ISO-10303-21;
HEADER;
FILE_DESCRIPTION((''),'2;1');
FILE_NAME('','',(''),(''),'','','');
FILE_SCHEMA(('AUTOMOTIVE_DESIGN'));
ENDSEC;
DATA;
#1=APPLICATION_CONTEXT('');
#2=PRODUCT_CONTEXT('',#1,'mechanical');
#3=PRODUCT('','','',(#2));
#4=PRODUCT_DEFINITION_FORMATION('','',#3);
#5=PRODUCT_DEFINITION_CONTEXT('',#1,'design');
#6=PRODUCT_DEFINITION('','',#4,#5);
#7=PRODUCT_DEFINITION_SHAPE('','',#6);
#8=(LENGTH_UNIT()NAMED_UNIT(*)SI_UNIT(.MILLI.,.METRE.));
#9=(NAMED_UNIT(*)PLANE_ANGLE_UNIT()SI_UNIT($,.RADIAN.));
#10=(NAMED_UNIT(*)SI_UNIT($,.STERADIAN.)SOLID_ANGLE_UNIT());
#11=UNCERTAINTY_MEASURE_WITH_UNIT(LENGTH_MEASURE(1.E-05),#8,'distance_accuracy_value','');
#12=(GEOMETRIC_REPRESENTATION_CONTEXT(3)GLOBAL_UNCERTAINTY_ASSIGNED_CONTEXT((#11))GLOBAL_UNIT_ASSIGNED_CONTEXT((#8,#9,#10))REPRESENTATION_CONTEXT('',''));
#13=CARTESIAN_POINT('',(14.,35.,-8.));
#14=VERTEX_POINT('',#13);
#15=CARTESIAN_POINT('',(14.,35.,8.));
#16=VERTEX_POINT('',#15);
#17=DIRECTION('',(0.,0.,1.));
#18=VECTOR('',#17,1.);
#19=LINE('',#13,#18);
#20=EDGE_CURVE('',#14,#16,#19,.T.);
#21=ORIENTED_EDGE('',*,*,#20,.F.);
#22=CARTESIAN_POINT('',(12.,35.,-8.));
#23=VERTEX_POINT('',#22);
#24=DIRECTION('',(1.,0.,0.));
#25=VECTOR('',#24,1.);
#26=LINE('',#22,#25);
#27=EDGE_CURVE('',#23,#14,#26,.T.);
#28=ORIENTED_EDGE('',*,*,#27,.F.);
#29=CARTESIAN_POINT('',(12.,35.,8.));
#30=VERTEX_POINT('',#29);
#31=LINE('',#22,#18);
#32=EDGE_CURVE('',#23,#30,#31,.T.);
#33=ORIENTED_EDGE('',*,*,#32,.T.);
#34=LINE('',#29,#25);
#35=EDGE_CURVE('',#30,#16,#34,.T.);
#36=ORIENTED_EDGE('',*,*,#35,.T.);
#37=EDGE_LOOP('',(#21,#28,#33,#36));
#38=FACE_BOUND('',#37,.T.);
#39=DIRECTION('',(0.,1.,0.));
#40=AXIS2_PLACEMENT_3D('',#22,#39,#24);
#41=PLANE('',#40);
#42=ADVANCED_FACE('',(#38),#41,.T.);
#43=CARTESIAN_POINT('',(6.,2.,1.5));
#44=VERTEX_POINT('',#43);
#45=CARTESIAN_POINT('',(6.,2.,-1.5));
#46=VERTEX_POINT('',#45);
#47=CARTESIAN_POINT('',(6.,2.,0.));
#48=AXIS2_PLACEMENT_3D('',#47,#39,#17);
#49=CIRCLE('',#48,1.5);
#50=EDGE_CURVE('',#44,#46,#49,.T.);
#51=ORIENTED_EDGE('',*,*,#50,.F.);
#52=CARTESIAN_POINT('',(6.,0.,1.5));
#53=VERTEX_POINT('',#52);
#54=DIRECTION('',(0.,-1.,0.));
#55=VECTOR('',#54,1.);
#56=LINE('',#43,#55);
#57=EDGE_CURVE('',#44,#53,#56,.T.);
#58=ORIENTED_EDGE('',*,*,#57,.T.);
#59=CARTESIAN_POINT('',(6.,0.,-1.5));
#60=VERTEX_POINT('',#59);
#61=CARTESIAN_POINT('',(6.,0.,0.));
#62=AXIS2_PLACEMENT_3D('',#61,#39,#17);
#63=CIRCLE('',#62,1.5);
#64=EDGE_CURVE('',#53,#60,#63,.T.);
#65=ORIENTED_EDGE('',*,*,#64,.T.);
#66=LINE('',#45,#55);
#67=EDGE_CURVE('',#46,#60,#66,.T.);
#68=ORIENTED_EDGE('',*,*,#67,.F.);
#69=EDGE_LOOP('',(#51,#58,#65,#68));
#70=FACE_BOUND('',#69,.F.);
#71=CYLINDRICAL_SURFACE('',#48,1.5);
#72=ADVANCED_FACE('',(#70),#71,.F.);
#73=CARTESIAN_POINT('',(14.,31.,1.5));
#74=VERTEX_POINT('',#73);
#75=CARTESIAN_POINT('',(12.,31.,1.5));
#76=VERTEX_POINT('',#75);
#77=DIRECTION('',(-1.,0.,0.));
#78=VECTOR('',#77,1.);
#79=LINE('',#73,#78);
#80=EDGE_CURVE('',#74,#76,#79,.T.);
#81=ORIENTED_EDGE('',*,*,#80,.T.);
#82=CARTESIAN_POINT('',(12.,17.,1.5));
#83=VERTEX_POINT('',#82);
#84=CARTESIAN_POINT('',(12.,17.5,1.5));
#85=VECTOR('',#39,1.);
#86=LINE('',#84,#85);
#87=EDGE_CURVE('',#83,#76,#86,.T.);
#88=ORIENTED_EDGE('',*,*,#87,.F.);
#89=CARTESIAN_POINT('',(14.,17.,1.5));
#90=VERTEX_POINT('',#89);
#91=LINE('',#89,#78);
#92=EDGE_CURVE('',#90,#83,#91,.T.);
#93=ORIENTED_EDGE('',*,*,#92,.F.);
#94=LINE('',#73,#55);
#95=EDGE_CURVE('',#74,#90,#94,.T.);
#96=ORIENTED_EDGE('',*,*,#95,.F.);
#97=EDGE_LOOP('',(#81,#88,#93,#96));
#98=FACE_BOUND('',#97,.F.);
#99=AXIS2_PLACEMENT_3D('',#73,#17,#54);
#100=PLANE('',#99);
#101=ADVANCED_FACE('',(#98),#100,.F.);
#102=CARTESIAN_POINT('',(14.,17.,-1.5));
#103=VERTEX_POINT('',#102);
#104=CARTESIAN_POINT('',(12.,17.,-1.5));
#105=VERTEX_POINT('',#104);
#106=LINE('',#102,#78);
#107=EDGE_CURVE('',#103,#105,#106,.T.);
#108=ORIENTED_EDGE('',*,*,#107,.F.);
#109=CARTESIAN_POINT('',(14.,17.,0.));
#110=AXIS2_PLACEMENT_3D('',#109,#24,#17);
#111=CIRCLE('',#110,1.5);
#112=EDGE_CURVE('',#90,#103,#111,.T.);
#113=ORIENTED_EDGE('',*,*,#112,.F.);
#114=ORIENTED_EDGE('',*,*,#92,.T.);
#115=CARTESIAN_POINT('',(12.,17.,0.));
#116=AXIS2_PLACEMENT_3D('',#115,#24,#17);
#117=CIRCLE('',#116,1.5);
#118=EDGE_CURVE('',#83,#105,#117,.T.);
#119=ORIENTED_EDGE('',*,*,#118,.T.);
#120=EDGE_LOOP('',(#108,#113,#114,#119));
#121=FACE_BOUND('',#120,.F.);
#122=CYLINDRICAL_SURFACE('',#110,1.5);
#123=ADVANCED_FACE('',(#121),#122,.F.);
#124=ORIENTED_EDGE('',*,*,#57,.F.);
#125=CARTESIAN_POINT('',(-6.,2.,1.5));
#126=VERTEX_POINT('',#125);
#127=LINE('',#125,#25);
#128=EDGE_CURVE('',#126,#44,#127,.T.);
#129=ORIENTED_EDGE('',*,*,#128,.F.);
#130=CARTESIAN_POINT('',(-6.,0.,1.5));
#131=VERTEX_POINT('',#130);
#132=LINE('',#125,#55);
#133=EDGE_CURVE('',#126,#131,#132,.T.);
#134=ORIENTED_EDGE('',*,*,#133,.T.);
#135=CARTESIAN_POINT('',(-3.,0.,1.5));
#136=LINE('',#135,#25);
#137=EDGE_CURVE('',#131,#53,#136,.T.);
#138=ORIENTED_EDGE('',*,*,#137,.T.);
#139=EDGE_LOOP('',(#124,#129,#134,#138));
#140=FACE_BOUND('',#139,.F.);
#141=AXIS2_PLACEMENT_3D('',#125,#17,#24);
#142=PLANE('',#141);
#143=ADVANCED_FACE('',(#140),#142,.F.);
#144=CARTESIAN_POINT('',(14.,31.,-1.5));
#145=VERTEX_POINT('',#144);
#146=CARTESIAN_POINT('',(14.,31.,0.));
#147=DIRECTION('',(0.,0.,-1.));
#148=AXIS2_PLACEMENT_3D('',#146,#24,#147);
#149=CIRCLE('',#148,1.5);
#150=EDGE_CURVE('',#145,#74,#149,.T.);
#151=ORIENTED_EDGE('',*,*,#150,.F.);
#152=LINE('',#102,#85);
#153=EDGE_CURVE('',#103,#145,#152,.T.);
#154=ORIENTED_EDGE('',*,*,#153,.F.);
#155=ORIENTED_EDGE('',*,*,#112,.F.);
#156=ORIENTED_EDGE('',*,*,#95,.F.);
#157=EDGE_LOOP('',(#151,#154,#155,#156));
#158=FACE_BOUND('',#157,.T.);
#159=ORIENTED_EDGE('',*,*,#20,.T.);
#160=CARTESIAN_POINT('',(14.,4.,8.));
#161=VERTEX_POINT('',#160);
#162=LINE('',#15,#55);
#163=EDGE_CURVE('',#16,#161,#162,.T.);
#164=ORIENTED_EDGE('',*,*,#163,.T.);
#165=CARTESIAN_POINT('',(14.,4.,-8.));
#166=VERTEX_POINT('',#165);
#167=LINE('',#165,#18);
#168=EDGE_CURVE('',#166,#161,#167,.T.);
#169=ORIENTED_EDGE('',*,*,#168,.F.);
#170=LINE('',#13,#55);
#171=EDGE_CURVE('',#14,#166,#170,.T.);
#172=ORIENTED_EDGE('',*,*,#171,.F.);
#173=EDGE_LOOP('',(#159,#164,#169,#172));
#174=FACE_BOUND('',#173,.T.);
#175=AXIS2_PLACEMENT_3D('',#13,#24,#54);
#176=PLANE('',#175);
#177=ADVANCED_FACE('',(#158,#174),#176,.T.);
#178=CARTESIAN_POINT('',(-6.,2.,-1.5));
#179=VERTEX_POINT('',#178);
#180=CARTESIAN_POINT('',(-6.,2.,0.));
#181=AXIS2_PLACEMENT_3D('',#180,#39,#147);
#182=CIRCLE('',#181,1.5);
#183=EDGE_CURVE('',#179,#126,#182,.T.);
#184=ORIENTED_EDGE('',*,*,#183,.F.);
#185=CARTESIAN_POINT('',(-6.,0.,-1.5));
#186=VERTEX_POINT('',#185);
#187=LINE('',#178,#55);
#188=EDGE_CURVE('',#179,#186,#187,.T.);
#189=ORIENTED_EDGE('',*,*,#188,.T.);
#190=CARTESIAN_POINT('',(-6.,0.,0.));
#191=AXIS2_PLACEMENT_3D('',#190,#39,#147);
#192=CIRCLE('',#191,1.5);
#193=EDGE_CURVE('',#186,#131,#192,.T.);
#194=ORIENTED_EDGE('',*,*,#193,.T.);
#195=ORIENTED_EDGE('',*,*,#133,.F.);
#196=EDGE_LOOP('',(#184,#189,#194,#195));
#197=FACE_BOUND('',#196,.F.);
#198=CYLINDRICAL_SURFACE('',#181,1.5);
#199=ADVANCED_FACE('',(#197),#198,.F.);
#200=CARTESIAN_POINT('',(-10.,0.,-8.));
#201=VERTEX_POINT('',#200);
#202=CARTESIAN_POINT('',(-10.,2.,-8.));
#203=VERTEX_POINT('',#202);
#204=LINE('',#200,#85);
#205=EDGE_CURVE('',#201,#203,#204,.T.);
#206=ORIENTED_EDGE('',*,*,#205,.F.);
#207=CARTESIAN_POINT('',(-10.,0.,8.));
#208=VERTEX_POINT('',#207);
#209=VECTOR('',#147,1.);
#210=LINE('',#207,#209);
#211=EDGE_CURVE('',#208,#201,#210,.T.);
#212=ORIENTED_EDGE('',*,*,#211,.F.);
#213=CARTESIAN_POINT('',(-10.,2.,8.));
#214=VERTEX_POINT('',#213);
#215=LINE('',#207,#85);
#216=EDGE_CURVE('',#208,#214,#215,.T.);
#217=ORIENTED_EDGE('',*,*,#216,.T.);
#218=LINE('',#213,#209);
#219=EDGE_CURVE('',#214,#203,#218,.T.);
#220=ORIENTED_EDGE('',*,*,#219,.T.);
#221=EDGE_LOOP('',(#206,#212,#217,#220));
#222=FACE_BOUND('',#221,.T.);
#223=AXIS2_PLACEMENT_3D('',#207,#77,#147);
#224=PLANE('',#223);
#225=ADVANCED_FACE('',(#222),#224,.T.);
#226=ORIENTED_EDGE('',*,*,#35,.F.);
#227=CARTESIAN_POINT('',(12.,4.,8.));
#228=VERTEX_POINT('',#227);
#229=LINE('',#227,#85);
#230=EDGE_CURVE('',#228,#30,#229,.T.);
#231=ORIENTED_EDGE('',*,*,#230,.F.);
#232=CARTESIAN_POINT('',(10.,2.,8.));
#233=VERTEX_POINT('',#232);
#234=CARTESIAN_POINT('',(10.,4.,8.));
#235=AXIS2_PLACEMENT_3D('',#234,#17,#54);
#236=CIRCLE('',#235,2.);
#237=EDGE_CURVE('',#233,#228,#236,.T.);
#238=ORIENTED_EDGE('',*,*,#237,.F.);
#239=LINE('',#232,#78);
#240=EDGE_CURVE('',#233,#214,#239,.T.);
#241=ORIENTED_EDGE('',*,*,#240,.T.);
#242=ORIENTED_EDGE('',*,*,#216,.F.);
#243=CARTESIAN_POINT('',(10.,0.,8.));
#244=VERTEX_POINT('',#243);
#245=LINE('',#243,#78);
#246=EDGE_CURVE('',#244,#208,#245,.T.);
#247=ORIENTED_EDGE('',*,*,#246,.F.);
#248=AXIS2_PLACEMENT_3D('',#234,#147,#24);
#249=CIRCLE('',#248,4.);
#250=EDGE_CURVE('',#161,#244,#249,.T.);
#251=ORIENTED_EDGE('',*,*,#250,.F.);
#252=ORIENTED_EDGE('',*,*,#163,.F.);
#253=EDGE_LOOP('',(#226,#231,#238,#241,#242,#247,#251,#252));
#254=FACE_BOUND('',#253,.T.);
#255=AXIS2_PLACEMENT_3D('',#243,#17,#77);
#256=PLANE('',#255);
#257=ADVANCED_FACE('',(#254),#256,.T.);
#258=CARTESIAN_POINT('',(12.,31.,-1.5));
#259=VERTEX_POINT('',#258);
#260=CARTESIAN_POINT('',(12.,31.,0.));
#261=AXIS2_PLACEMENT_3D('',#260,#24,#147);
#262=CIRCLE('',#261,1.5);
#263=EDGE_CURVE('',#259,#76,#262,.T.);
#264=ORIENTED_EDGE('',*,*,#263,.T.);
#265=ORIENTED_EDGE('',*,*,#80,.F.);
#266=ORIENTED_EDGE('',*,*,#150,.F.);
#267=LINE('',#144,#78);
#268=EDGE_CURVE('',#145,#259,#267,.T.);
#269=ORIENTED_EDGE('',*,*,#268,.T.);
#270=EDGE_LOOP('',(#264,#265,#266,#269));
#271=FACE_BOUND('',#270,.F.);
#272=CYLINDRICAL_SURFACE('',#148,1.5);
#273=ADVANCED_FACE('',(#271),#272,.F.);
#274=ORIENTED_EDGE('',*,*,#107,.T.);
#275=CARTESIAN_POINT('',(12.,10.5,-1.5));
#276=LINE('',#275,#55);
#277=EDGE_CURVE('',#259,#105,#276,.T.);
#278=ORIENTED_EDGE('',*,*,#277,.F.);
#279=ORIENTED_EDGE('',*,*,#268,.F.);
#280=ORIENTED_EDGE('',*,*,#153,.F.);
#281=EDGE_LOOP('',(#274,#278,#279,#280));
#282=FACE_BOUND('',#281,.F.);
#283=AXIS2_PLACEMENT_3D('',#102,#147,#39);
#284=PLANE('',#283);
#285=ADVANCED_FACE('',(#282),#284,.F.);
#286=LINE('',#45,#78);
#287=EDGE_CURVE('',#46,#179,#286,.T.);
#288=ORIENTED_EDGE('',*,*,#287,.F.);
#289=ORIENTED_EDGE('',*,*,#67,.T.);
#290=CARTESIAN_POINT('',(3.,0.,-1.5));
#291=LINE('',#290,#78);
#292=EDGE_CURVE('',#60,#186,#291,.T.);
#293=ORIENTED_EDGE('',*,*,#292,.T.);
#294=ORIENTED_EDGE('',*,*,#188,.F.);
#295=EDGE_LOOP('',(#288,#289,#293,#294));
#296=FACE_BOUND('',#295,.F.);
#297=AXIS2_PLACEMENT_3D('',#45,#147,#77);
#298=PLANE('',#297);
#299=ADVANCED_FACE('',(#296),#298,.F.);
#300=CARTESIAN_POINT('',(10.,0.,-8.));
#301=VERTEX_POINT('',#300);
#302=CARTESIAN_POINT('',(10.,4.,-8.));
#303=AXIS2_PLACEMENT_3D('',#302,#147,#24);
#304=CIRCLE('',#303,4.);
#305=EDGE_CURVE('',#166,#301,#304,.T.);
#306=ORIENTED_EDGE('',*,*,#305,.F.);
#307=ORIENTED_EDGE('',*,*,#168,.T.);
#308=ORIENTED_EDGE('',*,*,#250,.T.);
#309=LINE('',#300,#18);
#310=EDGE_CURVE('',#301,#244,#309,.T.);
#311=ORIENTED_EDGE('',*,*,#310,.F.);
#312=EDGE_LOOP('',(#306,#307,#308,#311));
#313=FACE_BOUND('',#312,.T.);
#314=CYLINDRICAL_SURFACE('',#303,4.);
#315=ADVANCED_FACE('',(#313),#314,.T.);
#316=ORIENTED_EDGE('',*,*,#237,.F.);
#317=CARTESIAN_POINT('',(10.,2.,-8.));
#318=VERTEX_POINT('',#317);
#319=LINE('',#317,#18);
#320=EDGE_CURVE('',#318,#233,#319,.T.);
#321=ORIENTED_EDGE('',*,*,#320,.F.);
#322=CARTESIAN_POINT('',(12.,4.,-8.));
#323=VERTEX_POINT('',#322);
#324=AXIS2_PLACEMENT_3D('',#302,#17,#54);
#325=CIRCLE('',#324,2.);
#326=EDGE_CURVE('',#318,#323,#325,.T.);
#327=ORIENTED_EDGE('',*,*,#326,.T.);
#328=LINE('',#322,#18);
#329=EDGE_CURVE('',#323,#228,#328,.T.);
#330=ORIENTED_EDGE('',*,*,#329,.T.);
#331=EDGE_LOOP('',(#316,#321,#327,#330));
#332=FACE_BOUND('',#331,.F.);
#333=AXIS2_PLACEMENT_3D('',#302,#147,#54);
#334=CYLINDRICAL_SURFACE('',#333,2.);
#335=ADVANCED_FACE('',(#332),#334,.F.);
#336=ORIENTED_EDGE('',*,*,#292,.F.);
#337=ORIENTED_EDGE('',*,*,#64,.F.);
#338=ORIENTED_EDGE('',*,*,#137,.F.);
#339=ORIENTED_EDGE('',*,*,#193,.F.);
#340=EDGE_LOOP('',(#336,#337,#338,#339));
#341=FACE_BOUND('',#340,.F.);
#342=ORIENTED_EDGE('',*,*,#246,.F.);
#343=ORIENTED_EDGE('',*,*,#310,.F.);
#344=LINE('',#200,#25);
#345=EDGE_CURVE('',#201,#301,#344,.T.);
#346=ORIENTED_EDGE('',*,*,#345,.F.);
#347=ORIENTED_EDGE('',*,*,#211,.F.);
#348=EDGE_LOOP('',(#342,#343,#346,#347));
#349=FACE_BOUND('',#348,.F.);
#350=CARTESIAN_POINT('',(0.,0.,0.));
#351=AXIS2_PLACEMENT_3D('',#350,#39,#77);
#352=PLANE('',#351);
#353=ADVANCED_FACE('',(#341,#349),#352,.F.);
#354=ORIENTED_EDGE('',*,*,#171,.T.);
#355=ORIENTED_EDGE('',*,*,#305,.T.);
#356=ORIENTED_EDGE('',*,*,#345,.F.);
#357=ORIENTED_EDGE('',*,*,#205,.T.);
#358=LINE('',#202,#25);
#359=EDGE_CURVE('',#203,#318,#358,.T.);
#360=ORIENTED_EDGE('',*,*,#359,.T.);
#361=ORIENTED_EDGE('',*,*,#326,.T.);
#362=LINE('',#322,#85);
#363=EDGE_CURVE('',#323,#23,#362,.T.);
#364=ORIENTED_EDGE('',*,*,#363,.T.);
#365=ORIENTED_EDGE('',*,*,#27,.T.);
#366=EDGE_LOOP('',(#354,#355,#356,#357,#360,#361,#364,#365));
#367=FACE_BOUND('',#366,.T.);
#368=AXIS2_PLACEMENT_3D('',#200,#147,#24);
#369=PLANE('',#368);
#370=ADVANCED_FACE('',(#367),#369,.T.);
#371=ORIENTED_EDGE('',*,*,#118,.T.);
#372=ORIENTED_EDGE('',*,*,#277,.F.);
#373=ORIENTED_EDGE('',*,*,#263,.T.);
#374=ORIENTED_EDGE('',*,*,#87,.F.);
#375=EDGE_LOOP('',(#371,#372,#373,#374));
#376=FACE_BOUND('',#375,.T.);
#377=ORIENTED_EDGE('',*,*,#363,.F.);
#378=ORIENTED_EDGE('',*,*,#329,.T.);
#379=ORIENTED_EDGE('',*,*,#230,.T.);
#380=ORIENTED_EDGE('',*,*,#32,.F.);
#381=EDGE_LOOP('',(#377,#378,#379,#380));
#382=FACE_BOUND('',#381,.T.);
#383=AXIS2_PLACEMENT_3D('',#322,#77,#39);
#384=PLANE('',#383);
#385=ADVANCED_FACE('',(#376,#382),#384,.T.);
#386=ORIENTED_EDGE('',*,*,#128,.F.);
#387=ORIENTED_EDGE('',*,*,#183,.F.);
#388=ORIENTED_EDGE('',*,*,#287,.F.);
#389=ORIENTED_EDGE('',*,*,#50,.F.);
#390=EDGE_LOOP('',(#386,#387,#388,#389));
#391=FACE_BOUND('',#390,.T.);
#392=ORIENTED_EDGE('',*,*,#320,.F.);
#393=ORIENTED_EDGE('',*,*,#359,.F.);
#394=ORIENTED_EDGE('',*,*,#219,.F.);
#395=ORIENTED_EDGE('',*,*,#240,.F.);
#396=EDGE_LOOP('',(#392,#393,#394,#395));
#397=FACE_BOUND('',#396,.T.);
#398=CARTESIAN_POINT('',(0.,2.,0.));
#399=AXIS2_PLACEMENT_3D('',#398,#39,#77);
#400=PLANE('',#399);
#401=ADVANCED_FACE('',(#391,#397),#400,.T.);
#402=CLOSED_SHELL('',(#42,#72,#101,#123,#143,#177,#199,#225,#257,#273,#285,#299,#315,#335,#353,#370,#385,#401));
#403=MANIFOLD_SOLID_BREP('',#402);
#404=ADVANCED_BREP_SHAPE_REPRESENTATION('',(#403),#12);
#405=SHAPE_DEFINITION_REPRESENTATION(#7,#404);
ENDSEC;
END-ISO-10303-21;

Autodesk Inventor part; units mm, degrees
ref_plane "YZ Plane" through (0, 0, 0) normal (1, 0, 0) x (0, 1, 0)
ref_plane "XZ Plane" through (0, 0, 0) normal (0, 1, 0) x (-1, 0, 0)
ref_plane "XY Plane" through (0, 0, 0) normal (0, 0, 1) x (1, 0, 0)
sketch "スケッチ1" plane through (0, 0, 0) normal (0, 1, 0) x (-1, 0, 0)
  line L0 (-10, 8) -> (10, 8)
  line L1 (10, 8) -> (10, -8)
  line L2 (10, -8) -> (-10, -8)
  line L3 (-10, -8) -> (-10, 8)
  line L4 (-10, 8) -> (10, -8) construction
  line L5 (10, 8) -> (-10, -8) construction
  point P0 (0, 0)
  dimension "d0" = 20
  dimension "d1" = 16
extrude "プレート1" add sketch "スケッチ1" along normal blind 2
sketch "スケッチ2" plane through (12, 4, -8) normal (1, 0, 0) x (0, 1, 0)
  line L0 (0, 16) -> (0, 0)
  line L1 (0, 0) -> (31, 0)
  line L2 (31, 0) -> (31, 16)
  line L3 (31, 16) -> (0, 16)
edge flange "フランジ1" height 35 angle 90 thickness 2 bend radius 2 thickness toward (1, 0, 0) relief tear relief width 2 relief depth 1 edges at (10, 2, 0) wall of the first edge with corners at (12, 4, 8) (12, 4, -8) (12, 35, -8) (12, 35, 8)
bend "曲げ1"
corner "コーナー1"
sketch "スケッチ3" plane through (14, 35, 8) normal (1, 0, 0) x (0, 0, -1)
  line L0 (6.5, -4) -> (6.5, -18)
  arc A0 (6.5, -18) -> (9.5, -18) centre (8, -18) ccw
  line L1 (9.5, -18) -> (9.5, -4)
  arc A1 (9.5, -4) -> (6.5, -4) centre (8, -4) ccw
  line L2 (16, 0) -> (16, -31) projected
  line L3 (0, 0) -> (16, 0) projected
  point P0 (8, -35)
  point P1 (8, 0)
  dimension "d19" = 1.5
extrude "押し出し1" cut sketch "スケッチ3" against normal blind 10
sketch "スケッチ4" plane through (0, 2, 0) normal (0, 1, 0) x (1, 0, 0)
  line L0 (-6, -1.5) -> (6, -1.5)
  arc A0 (6, -1.5) -> (6, 1.5) centre (6, 0) ccw
  line L1 (6, 1.5) -> (-6, 1.5)
  arc A1 (-6, 1.5) -> (-6, -1.5) centre (-6, 0) ccw
  line L2 (-10, -8) -> (-10, 8) projected
  line L3 (10, 8) -> (10, -8) projected
  point P0 (0, 0)
  dimension "d23" = 4
  dimension "d24" = 4
  dimension "d25" = 1.5
extrude "押し出し2" cut sketch "スケッチ4" against normal blind 10
equation "\"d2\" = Thickness"
equation "\"d3\" = BendReliefWidth"
equation "\"d4\" = BendReliefDepth"
equation "\"d5\" = MinimumRemnant"
equation "\"d6\" = TransitionRadius"
equation "\"d9\" = BendRadius"
equation "\"d10\" = CornerReliefSize"
equation "\"d11\" = GapSize"
equation "\"d12\" = JacobiRadiusSize"
equation "\"BendRadius\" = Thickness"
equation "\"BendReliefWidth\" = Thickness"
equation "\"BendReliefDepth\" = 0.5 * Thickness"
equation "\"CornerReliefSize\" = 4 * Thickness"
equation "\"MinimumRemnant\" = 2 * Thickness"
equation "\"TransitionRadius\" = BendRadius"
equation "\"JacobiRadiusSize\" = BendRadius"
equation "\"GapSize\" = Thickness"
equation "\"Thickness\" = 2"
properties part number "keyL_large" material "アルミニウム 6061"
